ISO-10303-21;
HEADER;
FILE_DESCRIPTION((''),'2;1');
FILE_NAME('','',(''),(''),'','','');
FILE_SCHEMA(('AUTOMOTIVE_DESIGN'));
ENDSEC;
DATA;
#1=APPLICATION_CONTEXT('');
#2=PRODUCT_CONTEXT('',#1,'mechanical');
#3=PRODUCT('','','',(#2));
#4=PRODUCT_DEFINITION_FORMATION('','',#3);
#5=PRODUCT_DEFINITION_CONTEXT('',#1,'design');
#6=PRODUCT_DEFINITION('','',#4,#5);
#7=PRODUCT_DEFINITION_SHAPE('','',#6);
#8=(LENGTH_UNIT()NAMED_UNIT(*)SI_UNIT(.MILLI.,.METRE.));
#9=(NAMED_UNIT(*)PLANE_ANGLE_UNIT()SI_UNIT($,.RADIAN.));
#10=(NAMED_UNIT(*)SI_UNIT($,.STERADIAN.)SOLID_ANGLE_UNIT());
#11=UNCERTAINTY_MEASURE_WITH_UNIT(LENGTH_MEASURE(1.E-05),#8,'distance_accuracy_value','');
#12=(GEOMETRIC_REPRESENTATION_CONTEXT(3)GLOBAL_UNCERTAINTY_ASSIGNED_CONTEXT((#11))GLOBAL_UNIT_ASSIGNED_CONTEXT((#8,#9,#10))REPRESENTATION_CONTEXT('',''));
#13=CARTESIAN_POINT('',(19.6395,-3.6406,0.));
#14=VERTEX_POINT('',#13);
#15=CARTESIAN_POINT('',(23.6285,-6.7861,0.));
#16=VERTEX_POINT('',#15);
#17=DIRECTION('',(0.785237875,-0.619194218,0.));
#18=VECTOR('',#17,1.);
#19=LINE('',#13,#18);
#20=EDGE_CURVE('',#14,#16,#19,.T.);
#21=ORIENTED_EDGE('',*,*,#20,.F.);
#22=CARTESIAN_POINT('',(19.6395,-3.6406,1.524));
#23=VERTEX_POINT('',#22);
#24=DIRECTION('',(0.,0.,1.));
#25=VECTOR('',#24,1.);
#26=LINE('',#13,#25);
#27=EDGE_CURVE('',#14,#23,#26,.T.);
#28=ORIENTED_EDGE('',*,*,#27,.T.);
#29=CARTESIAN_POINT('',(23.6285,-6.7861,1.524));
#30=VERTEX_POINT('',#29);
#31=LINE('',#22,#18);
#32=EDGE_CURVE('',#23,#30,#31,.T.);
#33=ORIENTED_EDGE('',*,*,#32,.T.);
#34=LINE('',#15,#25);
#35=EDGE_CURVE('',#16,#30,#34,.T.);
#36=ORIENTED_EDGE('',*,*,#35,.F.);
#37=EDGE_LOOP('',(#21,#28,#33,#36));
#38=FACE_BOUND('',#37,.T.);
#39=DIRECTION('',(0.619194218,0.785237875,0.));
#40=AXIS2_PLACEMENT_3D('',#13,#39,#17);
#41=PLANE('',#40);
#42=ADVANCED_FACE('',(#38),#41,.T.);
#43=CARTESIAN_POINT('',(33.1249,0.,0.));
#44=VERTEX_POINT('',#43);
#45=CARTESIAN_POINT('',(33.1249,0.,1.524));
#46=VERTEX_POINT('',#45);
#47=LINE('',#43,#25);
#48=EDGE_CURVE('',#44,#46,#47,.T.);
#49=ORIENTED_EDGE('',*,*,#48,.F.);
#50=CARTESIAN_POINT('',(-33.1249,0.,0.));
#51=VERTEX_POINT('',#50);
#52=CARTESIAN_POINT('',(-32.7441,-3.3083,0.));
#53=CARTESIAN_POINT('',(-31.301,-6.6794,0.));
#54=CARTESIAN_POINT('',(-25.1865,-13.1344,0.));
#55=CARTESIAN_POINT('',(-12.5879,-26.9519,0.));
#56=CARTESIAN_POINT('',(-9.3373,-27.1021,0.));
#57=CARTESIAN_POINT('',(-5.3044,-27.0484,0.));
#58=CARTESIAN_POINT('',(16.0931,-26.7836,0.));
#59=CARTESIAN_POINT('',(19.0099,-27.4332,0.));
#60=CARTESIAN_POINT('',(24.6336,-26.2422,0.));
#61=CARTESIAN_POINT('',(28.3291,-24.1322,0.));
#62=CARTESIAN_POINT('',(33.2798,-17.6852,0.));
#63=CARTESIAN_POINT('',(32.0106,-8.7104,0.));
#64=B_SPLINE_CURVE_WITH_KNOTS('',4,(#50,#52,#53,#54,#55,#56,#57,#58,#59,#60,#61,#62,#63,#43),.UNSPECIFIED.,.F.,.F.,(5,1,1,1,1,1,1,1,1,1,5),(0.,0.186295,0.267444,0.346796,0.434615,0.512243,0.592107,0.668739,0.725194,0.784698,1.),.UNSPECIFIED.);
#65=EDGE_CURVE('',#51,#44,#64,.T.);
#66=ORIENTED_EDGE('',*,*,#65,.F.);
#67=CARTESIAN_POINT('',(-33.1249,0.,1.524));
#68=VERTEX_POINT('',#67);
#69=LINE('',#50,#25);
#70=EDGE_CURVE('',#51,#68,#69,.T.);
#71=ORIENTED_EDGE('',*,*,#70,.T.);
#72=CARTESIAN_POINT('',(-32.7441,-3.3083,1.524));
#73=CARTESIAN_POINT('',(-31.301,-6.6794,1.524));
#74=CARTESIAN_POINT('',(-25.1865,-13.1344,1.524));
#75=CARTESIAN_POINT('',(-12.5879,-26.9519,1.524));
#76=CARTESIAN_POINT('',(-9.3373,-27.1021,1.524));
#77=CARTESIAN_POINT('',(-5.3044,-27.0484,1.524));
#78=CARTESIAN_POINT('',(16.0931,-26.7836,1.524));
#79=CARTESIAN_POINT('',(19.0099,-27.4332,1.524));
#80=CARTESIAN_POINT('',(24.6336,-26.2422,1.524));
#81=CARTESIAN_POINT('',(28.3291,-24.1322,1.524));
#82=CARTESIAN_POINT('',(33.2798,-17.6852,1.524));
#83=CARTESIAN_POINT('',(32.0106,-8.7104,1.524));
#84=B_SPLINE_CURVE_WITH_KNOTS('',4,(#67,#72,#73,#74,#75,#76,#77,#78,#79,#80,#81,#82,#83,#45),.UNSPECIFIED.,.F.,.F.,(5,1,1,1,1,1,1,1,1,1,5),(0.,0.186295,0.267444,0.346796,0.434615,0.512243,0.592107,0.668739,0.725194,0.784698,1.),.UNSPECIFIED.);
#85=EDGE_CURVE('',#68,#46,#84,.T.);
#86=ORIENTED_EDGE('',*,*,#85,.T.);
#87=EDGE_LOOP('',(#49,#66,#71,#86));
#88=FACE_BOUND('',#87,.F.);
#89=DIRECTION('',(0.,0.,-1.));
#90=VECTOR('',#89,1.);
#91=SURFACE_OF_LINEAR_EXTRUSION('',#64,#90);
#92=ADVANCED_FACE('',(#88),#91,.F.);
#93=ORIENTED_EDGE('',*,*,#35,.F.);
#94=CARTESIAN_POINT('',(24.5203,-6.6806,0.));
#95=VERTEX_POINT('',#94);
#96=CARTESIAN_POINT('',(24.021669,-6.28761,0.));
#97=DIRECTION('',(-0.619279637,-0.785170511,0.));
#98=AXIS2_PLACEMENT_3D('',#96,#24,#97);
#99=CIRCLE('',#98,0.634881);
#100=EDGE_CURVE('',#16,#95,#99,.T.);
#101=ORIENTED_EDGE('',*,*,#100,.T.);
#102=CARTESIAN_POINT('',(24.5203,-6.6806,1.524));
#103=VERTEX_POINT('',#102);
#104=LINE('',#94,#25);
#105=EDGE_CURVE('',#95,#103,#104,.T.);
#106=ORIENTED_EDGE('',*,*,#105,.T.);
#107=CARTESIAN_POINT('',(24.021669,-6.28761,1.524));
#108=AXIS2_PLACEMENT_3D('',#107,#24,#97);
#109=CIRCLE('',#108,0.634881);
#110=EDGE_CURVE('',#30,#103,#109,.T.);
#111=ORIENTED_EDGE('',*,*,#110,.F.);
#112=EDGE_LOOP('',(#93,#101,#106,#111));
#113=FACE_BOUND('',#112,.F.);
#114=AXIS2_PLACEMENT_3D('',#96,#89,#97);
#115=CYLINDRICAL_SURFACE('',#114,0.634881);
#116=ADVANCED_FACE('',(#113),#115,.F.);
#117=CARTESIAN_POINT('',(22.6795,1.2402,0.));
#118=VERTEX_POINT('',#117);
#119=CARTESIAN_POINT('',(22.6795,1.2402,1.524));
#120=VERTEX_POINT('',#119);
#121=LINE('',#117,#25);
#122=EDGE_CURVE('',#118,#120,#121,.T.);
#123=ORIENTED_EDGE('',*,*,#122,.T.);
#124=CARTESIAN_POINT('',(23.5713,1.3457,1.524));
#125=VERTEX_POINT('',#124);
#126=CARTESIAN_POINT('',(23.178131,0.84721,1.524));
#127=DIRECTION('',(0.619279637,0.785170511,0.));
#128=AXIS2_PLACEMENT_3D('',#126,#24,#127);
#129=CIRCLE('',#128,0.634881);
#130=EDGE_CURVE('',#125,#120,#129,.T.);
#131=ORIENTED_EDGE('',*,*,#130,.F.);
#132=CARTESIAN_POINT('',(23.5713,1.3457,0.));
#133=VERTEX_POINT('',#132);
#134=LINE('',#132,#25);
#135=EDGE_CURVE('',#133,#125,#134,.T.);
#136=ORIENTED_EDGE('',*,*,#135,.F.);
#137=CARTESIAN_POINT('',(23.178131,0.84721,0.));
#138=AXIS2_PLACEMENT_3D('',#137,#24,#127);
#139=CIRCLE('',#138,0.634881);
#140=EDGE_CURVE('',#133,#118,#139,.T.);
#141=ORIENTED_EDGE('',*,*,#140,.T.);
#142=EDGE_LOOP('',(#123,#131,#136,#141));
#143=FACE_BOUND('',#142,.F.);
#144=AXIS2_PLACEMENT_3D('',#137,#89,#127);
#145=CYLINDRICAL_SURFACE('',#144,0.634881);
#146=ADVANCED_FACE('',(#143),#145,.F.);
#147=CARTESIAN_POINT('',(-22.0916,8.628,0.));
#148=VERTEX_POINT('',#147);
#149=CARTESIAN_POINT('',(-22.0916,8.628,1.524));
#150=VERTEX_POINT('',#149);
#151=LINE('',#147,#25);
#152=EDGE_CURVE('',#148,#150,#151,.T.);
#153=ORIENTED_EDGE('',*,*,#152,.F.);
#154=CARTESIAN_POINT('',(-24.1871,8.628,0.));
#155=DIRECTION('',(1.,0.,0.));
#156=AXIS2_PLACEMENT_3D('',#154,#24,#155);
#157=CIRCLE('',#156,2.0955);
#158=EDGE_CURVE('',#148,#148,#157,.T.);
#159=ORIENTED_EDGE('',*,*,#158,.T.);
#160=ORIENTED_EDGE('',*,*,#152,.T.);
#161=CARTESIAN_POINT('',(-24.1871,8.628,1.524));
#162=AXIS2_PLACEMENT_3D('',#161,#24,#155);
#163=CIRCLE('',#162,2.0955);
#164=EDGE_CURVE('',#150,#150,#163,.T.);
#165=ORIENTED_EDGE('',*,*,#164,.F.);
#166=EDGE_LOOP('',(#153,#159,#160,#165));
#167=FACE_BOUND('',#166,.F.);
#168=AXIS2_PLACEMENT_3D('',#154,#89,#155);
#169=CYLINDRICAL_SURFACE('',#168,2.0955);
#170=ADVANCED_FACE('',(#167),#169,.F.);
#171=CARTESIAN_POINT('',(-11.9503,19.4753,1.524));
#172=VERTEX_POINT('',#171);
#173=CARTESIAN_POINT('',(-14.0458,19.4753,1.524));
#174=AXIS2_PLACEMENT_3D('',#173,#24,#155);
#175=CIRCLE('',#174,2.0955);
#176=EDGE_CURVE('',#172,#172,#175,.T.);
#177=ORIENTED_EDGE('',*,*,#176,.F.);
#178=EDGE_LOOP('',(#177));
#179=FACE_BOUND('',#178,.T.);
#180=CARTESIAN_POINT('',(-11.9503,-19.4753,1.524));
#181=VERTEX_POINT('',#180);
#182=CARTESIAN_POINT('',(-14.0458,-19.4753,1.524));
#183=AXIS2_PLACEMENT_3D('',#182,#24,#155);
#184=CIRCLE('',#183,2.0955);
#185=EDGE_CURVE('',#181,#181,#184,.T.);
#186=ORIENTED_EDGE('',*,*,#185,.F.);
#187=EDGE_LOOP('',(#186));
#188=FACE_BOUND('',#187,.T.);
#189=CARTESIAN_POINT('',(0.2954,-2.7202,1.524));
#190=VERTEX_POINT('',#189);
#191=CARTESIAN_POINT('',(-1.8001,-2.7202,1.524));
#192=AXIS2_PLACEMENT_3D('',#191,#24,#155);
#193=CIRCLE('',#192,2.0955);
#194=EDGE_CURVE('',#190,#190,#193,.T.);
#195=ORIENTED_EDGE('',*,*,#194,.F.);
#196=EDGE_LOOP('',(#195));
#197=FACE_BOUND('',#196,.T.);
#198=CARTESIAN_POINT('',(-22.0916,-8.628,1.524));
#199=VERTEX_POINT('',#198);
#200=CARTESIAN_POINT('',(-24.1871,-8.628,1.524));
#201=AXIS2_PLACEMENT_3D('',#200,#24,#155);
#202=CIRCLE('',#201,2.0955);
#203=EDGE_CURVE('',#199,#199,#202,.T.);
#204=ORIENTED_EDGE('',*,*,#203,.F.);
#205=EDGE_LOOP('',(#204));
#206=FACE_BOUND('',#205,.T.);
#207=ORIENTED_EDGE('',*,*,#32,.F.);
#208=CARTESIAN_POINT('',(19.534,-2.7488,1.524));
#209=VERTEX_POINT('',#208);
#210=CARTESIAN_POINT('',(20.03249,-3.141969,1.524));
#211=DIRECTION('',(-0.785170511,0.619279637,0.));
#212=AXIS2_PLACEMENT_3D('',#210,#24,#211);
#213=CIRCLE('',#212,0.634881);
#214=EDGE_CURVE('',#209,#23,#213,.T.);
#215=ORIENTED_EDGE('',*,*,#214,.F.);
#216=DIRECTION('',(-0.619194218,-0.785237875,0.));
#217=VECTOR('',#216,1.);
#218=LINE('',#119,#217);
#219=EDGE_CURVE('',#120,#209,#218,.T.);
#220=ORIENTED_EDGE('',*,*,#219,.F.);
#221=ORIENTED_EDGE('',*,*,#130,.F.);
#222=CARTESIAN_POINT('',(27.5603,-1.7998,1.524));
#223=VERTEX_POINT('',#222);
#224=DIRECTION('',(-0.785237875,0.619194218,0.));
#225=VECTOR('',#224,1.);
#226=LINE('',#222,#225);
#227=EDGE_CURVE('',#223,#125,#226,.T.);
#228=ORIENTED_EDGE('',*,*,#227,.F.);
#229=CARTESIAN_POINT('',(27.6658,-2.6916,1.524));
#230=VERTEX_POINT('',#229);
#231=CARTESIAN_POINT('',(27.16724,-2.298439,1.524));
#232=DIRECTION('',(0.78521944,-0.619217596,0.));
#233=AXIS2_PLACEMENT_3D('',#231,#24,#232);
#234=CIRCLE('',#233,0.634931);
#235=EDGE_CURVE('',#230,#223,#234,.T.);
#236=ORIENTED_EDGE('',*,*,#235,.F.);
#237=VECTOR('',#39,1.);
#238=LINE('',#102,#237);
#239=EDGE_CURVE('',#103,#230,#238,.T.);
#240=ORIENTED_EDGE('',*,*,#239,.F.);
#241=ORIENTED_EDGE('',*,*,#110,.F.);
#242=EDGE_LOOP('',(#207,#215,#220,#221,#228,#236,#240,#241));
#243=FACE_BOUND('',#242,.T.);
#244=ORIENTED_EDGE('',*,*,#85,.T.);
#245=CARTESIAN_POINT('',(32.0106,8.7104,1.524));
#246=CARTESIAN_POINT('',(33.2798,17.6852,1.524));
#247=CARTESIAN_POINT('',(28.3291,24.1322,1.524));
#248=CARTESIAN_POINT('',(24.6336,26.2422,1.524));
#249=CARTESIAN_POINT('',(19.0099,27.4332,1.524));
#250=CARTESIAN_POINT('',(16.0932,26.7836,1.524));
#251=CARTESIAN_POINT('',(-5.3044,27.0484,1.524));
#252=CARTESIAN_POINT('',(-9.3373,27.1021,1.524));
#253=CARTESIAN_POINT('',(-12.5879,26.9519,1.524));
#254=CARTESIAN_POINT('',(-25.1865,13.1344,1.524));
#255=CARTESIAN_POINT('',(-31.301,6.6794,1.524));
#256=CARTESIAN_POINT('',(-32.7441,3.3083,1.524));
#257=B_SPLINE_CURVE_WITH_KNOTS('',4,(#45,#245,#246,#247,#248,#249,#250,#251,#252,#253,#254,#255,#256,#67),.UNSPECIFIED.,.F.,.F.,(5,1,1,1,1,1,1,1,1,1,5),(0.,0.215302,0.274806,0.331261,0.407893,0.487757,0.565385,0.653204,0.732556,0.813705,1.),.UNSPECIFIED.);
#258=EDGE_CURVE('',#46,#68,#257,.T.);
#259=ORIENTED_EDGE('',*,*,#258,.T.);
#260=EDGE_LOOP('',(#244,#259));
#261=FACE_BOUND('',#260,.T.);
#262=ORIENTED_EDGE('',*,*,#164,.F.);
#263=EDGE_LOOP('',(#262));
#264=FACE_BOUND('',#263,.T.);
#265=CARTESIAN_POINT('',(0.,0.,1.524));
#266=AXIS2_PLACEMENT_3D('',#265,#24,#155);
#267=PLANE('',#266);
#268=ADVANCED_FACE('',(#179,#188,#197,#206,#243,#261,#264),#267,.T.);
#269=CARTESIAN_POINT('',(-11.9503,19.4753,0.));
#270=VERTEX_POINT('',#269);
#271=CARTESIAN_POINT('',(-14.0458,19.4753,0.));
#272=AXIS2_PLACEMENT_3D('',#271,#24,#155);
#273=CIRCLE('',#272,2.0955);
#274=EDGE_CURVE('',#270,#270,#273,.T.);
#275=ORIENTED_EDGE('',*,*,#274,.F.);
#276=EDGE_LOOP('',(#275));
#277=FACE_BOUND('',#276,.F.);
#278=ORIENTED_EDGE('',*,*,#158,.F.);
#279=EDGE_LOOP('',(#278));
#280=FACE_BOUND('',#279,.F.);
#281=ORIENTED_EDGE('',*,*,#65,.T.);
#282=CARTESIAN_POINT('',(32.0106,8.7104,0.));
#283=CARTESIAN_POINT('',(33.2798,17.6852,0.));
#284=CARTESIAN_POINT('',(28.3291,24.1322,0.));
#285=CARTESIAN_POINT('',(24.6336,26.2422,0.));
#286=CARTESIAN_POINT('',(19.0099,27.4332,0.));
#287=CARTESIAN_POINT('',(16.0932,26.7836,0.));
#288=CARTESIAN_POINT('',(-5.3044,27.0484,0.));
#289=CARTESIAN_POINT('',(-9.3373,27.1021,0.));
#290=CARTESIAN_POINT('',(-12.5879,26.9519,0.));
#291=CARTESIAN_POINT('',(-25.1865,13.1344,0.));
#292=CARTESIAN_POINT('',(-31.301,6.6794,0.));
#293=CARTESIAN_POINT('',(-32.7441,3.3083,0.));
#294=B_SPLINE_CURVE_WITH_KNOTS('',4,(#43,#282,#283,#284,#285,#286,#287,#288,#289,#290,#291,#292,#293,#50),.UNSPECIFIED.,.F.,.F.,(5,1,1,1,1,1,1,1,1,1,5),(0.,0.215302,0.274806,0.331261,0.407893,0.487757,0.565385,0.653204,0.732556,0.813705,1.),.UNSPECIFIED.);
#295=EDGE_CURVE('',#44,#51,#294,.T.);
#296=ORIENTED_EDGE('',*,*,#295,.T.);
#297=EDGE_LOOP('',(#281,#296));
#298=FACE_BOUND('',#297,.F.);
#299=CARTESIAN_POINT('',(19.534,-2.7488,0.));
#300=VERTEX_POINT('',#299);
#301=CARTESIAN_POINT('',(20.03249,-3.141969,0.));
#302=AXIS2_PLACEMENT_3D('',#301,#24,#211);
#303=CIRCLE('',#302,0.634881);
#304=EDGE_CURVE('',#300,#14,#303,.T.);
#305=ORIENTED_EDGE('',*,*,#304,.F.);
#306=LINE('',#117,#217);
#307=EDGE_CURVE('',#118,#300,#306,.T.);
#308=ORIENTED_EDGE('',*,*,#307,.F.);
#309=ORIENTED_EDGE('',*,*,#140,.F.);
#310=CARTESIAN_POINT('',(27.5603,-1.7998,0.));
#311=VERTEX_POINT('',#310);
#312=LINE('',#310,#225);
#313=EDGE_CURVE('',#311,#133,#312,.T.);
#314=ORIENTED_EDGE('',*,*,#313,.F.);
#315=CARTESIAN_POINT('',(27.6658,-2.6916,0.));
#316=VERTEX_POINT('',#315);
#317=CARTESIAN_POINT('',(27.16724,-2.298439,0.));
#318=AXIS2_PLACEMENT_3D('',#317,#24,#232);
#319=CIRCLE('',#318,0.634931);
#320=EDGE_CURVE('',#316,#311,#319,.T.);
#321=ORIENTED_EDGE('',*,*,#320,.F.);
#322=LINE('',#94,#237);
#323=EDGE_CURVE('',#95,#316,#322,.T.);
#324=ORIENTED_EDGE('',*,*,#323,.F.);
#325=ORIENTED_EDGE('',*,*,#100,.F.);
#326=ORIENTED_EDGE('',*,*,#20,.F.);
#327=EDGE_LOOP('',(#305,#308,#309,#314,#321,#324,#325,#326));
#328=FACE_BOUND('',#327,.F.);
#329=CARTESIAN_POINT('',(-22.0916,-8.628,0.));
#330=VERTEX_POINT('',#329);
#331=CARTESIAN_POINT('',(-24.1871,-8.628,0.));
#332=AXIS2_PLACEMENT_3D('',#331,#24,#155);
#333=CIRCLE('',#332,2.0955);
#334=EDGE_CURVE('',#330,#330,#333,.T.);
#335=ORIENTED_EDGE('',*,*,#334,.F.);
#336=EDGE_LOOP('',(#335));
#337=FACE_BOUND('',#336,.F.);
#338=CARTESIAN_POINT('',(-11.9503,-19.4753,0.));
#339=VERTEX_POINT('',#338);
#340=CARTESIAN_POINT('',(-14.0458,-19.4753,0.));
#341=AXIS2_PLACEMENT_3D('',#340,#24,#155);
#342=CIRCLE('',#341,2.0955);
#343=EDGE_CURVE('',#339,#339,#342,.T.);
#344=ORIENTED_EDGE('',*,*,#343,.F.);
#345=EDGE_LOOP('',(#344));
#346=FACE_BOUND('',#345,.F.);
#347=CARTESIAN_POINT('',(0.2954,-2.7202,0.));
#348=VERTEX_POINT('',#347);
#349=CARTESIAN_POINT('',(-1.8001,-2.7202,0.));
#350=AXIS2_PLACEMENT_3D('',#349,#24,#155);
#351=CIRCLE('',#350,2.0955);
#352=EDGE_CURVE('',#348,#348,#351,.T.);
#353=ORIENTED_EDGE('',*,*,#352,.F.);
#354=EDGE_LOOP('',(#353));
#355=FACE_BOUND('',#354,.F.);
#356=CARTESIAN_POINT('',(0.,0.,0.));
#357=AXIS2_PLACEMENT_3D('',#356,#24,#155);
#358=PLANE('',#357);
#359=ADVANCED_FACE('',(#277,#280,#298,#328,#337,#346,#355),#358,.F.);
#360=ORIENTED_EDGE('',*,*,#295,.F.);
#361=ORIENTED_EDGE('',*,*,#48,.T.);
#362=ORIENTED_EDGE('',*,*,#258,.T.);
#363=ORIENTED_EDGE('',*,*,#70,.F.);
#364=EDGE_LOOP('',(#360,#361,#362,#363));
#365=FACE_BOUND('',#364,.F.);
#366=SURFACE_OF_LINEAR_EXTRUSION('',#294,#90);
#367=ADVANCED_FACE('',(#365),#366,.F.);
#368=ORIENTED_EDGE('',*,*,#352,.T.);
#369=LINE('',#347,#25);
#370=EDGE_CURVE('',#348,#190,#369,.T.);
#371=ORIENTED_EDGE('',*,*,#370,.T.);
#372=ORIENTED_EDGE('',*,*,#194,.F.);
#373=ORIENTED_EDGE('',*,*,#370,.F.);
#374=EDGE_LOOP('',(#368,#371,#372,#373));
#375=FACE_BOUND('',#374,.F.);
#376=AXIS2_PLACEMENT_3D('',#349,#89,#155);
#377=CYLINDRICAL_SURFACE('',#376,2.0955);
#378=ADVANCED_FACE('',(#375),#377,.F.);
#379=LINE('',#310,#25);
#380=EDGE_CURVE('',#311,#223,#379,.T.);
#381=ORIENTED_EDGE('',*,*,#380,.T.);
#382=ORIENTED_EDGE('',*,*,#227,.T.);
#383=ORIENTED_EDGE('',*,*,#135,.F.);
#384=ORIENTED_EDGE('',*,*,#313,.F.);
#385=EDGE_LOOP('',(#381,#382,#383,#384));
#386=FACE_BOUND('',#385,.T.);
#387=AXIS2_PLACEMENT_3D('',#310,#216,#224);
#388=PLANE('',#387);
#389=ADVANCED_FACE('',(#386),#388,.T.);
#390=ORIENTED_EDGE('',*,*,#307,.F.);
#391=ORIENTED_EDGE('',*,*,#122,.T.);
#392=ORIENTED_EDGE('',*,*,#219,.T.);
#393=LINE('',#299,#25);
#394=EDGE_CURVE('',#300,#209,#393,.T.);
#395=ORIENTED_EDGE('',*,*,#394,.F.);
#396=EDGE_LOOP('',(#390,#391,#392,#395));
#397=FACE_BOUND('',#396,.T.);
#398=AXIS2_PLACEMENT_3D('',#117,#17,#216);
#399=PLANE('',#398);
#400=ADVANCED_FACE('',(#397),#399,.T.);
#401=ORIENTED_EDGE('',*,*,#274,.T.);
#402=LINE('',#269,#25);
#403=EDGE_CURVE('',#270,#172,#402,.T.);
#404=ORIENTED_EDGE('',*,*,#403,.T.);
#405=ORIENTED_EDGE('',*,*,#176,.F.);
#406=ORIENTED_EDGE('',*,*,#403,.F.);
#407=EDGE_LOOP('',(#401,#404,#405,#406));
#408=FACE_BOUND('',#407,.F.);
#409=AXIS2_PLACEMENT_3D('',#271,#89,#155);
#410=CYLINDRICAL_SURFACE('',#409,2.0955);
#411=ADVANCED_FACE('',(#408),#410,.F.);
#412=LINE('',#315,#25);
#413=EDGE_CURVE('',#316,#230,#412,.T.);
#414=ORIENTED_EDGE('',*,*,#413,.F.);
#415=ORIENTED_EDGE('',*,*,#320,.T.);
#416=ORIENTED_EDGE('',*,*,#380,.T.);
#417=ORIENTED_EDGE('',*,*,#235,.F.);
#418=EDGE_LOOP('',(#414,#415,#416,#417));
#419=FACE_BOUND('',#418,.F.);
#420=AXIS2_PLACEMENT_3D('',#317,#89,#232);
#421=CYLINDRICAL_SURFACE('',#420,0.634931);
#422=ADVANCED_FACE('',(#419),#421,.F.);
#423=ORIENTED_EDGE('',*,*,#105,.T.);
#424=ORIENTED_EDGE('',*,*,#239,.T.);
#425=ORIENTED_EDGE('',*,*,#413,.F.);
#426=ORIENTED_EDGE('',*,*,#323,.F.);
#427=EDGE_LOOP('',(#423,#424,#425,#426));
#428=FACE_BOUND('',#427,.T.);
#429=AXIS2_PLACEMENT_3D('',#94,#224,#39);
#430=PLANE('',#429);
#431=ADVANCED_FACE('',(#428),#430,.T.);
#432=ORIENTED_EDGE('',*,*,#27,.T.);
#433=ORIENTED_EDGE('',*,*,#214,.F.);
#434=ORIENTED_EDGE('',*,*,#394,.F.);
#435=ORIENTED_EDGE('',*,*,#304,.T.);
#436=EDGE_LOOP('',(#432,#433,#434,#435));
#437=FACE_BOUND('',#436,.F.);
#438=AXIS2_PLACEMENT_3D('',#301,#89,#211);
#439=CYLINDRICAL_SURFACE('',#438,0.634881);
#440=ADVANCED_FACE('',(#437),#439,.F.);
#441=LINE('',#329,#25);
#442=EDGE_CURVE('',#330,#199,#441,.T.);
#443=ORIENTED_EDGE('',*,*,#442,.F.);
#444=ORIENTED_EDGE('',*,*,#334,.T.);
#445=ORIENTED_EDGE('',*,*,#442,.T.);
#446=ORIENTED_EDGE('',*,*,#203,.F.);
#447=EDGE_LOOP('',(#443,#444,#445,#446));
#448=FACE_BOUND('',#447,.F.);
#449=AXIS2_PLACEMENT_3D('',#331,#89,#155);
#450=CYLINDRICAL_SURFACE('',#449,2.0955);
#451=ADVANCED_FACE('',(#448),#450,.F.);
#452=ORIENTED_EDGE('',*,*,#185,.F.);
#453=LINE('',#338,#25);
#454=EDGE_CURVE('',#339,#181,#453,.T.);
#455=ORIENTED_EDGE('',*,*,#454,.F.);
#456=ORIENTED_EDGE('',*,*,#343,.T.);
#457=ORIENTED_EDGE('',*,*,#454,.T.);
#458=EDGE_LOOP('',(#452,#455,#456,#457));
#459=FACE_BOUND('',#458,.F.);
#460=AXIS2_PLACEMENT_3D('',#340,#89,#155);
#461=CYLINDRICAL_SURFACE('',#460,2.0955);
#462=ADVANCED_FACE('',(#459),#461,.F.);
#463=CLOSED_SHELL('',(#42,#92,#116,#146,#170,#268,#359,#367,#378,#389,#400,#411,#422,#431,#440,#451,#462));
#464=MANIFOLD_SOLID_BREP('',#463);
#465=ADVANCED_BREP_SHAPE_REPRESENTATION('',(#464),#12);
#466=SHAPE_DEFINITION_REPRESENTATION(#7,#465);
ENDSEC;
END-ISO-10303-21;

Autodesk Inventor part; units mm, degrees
ref_plane "YZ Plane" through (0, 0, 0) normal (1, 0, 0) x (0, 1, 0)
ref_plane "XZ Plane" through (0, 0, 0) normal (0, 1, 0) x (-1, 0, 0)
ref_plane "XY Plane" through (0, 0, 0) normal (0, 0, 1) x (1, 0, 0)
sketch "Sketch1" plane through (0, 0, 0) normal (0, 0, 1) x (1, 0, 0)
  spline S0 degree 4 poles (-33.1249, 0) (-32.7441, -3.3083) (-31.301, -6.6794) (-25.1865, -13.1344) (-12.5879, -26.9519) (-9.3373, -27.1021) (-5.3044, -27.0484) (16.0931, -26.7836) (19.0099, -27.4332) (24.6336, -26.2422) (28.3291, -24.1322) (33.2798, -17.6852) (32.0106, -8.7104) (33.1249, 0) knots 0 0 0 0 0 0.186295 0.267444 0.346796 0.434615 0.512243 0.592107 0.668739 0.725194 0.784698 1 1 1 1 1
  spline S1 degree 4 poles (33.1249, 0) (32.0106, 8.7104) (33.2798, 17.6852) (28.3291, 24.1322) (24.6336, 26.2422) (19.0099, 27.4332) (16.0932, 26.7836) (-5.3044, 27.0484) (-9.3373, 27.1021) (-12.5879, 26.9519) (-25.1865, 13.1344) (-31.301, 6.6794) (-32.7441, 3.3083) (-33.1249, 0) knots 0 0 0 0 0 0.215302 0.274806 0.331261 0.407893 0.487757 0.565385 0.653204 0.732556 0.813705 1 1 1 1 1
  line L0 (27.5603, -1.7998) -> (23.5713, 1.3457)
  arc A0 (27.6658, -2.6916) -> (27.5603, -1.7998) centre (27.1671, -2.2984) ccw
  line L1 (24.5203, -6.6806) -> (27.6658, -2.6916)
  arc A1 (23.6285, -6.7861) -> (24.5203, -6.6806) centre (24.0217, -6.2875) ccw
  line L2 (19.6395, -3.6406) -> (23.6285, -6.7861)
  arc A2 (19.534, -2.7488) -> (19.6395, -3.6406) centre (20.0326, -3.142) ccw
  line L3 (22.6795, 1.2402) -> (19.534, -2.7488)
  arc A3 (23.5713, 1.3457) -> (22.6795, 1.2402) centre (23.1781, 0.8471) ccw
  circle A4 centre (-1.8001, -2.7202) radius 2.0955
  circle A5 centre (-14.0458, -19.4753) radius 2.0955
  circle A6 centre (-14.0458, 19.4753) radius 2.0955
  circle A7 centre (-24.1871, -8.628) radius 2.0955
  circle A8 centre (-24.1871, 8.628) radius 2.0955
  point P0 (-0.0456, -0.069)
  point P1 (-32.175, -3.7784)
  point P2 (-29.5173, -8.1033)
  point P3 (-21.489, -17.2087)
  point P4 (-12.0921, -26.1201)
  point P5 (-9.5119, -26.9934)
  point P6 (-5.4733, -27.0476)
  point P7 (15.9689, -27.0472)
  point P8 (20.8905, -26.9087)
  point P9 (24.5964, -26.005)
  point P10 (26.7618, -24.8125)
  point P11 (29.203, -22.1593)
  point P12 (31.7141, -15.7042)
  point P13 (31.7141, 15.7042)
  point P14 (29.203, 22.1593)
  point P15 (26.7618, 24.8125)
  point P16 (24.5964, 26.005)
  point P17 (20.8905, 26.9087)
  point P18 (15.9689, 27.0472)
  point P19 (-5.4733, 27.0476)
  point P20 (-9.512, 26.9934)
  point P21 (-12.0921, 26.1201)
  point P22 (-21.489, 17.2087)
  point P23 (-29.5173, 8.1033)
  point P24 (-32.175, 3.7784)
  dimension "d0" = 4.191
  dimension "d1" = 4.191
  dimension "d2" = 4.191
  dimension "d3" = 4.191
  dimension "d4" = 4.191
extrude "Extrusion1" add sketch "Sketch1" along normal blind 1.524
equation "\"d2\" = d1"
equation "\"d3\" = d1"
equation "\"d4\" = d3"
properties part number "outer-tracking-wheel"
